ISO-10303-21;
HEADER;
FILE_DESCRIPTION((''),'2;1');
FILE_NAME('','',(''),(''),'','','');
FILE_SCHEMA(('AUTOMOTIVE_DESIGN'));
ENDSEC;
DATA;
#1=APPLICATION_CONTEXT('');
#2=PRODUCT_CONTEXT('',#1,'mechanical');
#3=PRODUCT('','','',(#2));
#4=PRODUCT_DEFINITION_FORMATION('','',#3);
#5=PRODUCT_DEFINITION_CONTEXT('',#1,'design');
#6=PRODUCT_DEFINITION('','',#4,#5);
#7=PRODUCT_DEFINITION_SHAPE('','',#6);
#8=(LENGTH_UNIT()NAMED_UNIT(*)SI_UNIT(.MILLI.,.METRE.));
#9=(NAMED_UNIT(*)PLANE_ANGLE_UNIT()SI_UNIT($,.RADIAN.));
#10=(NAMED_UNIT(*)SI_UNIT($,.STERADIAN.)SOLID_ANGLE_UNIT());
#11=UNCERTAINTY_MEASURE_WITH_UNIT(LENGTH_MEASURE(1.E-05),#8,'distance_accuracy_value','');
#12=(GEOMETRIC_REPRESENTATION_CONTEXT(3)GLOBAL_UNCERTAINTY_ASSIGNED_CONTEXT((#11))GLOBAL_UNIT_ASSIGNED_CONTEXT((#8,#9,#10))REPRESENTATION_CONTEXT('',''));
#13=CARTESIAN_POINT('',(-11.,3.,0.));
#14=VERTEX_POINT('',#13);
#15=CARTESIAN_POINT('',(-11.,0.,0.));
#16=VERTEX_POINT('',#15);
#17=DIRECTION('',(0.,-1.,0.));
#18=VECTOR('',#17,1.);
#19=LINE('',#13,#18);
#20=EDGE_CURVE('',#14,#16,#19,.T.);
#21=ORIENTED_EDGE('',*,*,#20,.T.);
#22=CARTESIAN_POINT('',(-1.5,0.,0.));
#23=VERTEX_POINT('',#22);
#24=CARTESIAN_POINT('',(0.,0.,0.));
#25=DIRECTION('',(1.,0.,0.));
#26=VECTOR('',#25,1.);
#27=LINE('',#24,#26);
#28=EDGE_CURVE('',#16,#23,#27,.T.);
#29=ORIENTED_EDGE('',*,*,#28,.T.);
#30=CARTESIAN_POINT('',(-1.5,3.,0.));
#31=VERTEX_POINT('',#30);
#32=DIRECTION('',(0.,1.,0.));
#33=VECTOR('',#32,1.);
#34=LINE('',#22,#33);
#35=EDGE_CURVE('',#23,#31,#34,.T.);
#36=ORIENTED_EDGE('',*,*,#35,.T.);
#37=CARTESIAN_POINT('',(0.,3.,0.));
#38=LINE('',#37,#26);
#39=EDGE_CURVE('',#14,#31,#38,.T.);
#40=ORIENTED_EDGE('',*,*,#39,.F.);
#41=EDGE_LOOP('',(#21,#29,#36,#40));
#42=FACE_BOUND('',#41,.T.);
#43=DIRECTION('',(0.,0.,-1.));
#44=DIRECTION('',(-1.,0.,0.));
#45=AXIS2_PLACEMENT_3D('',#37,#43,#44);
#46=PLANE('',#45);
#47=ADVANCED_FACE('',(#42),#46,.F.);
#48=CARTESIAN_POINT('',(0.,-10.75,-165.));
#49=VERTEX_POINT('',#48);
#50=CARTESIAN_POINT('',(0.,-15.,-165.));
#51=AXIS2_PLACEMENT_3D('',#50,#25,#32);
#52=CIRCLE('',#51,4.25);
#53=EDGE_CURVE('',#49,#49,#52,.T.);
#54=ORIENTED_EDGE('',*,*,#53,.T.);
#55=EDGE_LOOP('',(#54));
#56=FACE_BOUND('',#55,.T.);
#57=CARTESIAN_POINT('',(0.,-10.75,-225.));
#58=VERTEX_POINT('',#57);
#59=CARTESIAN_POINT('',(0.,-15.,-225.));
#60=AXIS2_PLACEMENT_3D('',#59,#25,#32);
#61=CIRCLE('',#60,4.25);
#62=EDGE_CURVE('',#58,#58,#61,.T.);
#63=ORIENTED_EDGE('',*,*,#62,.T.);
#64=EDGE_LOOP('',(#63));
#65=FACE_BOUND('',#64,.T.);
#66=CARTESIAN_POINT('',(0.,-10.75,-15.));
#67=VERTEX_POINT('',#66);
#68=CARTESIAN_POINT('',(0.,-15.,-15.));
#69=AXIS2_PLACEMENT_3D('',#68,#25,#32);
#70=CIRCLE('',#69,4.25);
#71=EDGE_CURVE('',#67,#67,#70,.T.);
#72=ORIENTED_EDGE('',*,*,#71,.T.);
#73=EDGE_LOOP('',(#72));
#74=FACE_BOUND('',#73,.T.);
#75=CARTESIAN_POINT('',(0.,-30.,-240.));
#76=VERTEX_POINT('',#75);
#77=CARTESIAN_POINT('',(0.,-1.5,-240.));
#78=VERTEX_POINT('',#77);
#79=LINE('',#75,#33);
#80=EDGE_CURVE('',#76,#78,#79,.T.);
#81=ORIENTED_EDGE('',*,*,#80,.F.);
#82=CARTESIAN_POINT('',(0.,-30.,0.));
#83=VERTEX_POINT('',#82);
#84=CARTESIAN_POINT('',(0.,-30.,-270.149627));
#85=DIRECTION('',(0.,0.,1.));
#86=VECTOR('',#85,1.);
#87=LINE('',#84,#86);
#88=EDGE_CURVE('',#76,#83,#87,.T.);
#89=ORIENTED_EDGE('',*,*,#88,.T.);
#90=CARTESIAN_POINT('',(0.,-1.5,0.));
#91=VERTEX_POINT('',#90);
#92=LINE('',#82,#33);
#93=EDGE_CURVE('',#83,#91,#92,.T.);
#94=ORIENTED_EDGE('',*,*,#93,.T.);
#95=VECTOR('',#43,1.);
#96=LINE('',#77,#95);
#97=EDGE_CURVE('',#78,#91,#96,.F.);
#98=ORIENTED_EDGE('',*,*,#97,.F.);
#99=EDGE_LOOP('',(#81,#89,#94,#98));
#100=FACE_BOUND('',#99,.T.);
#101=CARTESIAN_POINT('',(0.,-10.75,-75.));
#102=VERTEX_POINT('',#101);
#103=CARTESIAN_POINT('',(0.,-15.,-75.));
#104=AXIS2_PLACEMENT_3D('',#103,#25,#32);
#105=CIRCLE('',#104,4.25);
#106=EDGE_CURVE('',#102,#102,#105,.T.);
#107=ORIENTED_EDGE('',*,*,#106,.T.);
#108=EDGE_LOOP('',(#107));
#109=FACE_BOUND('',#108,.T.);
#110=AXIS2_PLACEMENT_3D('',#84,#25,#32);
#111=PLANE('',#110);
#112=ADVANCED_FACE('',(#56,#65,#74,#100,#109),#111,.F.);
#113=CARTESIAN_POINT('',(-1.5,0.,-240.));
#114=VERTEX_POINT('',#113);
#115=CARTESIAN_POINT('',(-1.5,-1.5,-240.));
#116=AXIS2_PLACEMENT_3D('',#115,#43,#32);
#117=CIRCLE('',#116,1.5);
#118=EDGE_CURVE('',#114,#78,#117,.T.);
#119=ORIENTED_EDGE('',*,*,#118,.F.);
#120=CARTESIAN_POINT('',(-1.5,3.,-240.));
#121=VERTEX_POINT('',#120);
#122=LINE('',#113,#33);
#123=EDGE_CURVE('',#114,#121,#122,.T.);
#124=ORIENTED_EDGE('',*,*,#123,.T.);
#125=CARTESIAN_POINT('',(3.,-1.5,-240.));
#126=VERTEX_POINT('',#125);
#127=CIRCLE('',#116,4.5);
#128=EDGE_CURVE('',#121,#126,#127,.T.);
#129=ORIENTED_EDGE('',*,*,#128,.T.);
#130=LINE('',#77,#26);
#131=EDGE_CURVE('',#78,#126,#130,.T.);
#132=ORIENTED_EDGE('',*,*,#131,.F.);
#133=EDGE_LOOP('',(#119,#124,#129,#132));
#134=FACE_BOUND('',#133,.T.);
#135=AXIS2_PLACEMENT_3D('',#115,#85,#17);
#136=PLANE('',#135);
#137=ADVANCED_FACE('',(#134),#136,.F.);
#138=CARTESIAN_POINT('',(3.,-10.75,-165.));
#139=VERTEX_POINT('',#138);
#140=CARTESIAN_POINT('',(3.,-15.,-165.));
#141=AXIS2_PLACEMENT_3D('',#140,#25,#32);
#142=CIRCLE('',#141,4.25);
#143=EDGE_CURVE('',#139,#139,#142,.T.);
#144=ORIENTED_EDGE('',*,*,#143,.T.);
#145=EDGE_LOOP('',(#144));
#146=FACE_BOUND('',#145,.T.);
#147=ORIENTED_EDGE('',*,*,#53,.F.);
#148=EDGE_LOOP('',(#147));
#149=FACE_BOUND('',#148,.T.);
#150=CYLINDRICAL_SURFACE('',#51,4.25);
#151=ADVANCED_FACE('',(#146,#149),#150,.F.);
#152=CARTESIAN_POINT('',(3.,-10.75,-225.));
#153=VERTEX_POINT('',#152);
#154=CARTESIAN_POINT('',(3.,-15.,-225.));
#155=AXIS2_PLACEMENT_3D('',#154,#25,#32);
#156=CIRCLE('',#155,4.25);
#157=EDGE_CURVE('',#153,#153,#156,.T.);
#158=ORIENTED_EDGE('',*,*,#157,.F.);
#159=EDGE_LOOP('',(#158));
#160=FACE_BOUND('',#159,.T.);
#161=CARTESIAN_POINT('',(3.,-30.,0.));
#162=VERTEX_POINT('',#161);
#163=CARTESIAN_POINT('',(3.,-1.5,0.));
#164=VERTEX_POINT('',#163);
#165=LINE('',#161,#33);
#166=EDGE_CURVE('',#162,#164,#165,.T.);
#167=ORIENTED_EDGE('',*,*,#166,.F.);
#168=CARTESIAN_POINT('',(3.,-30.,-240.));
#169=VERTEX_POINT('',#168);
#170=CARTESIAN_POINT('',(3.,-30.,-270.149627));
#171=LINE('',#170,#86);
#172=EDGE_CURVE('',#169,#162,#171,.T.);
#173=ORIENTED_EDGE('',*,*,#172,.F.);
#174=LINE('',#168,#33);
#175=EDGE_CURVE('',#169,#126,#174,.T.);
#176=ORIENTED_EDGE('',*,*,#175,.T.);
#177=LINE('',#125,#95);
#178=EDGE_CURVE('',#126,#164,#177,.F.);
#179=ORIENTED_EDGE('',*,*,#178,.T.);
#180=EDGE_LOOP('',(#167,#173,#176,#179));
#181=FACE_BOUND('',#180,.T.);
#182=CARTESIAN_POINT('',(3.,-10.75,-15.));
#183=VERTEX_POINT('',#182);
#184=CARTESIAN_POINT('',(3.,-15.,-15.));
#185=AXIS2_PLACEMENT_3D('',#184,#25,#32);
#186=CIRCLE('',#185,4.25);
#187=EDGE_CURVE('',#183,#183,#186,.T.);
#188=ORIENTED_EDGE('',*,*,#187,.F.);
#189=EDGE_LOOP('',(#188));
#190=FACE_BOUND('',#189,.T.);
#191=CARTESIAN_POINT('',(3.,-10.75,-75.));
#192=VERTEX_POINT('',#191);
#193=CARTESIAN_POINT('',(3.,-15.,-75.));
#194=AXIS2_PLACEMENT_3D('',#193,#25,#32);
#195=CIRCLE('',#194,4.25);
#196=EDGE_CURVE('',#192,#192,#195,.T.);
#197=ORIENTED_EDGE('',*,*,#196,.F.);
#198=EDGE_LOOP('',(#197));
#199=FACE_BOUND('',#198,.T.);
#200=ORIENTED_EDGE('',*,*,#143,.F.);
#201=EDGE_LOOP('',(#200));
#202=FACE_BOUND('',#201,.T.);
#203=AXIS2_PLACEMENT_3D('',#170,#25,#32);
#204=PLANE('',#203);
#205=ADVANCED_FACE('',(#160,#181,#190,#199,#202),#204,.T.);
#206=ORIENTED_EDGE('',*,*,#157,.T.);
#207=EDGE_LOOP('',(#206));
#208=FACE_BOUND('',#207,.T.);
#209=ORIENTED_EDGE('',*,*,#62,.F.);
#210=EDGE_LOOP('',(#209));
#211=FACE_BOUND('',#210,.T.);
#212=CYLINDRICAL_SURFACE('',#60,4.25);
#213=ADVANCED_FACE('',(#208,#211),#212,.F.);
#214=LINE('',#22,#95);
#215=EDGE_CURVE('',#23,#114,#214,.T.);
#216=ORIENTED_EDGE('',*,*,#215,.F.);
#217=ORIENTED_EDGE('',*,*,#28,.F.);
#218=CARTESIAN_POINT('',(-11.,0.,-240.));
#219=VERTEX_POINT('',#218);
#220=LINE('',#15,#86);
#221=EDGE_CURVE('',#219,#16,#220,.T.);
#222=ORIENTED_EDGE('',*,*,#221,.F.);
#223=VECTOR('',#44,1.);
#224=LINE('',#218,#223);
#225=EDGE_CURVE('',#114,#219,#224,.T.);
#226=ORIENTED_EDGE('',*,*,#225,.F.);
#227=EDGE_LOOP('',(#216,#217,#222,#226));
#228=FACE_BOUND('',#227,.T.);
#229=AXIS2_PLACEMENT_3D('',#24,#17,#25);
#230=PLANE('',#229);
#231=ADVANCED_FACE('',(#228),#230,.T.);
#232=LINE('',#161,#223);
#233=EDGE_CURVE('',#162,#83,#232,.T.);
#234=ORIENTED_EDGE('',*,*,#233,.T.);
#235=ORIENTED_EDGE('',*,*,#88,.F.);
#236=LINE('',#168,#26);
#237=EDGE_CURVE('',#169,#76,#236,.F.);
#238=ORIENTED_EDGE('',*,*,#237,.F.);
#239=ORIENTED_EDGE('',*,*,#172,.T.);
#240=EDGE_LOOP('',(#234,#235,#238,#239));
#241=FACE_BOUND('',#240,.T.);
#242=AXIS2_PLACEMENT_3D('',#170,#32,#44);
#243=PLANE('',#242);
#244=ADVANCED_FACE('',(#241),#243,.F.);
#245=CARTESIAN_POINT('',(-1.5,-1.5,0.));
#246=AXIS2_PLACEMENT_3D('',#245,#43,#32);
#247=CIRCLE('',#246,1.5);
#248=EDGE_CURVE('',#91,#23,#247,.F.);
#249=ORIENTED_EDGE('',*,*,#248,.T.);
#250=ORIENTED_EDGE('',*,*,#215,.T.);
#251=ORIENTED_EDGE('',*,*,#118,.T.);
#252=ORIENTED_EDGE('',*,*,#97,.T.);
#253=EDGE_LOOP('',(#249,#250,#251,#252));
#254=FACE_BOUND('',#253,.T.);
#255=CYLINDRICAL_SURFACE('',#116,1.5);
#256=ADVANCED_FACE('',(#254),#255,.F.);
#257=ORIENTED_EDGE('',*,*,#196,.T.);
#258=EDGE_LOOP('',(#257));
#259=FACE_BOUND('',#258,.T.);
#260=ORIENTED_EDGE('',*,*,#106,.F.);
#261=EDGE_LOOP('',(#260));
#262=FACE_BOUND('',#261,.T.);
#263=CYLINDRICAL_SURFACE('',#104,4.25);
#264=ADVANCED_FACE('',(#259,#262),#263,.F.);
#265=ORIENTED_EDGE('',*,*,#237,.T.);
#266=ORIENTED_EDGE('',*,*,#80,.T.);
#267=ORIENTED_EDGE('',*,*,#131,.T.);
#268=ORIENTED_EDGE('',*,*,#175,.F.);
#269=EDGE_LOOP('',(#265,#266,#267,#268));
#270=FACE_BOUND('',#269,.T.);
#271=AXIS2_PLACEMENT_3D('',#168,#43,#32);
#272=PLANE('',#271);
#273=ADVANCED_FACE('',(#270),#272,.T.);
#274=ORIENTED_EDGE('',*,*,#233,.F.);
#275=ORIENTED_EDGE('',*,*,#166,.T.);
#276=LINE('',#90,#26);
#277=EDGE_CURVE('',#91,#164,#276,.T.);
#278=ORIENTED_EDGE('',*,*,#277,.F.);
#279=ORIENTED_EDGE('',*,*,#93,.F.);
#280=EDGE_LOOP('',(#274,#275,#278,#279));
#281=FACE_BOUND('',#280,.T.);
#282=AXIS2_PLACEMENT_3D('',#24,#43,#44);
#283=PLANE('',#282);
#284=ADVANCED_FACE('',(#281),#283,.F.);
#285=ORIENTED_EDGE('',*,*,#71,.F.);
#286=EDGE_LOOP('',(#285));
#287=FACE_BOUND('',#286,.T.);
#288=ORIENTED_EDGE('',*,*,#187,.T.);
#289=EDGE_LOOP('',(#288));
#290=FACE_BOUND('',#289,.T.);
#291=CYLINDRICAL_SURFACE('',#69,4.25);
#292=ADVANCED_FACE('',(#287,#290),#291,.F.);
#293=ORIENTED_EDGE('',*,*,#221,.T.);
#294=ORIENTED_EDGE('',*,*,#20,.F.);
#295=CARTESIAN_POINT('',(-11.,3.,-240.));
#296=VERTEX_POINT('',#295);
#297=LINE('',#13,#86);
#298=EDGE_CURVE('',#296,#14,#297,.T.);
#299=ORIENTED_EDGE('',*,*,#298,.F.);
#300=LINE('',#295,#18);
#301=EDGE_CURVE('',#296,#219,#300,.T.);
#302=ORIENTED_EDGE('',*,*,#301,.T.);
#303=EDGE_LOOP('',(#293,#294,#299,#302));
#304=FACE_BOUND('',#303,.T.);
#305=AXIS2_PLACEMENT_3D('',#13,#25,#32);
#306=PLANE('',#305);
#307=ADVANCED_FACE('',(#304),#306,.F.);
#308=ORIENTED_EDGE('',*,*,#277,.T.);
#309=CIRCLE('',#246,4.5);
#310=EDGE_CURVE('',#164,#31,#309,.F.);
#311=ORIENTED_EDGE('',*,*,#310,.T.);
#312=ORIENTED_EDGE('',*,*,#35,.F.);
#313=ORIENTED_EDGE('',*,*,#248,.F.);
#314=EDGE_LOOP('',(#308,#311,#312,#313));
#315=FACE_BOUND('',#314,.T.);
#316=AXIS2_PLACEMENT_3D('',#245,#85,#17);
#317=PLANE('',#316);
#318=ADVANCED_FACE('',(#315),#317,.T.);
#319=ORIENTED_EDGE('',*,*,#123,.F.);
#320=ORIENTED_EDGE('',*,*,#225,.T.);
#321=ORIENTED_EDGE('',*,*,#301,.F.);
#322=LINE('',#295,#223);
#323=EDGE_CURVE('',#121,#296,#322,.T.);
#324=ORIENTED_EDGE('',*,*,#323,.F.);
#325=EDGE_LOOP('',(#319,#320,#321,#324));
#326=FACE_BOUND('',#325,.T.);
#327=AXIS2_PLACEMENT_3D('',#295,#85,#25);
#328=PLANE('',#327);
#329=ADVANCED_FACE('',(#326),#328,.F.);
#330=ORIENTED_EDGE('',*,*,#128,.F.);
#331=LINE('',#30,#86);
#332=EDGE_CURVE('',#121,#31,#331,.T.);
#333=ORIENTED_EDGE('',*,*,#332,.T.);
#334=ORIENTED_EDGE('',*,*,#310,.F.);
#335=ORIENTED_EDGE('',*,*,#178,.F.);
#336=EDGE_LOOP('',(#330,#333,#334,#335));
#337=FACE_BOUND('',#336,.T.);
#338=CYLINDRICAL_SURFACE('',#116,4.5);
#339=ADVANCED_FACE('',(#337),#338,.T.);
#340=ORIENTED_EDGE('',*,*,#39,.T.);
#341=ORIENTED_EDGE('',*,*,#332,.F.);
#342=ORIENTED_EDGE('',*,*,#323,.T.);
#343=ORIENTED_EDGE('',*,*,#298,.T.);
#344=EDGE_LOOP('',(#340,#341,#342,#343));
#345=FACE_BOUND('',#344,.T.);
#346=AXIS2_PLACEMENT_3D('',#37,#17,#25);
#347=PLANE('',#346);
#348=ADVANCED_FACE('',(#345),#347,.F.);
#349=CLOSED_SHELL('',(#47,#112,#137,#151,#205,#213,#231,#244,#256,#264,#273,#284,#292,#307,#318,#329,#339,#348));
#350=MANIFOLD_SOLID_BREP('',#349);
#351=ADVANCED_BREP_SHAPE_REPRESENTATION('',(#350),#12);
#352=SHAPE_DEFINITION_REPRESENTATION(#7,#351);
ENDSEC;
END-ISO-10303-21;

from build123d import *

# Parameters (mm, degrees)
SKETCH_1_W                       = 3
SKETCH_1_H                       = 30
SM_BASE_FLANGE_1_DEPTH           = 240
SKETCH_6_R                       = 4.25
CUT_EXTRUDE_1_DEPTH              = 242.886336944
SM_EDGE_FLANGE_1_STRIP_W         = 15
SM_EDGE_FLANGE_1_STRIP_H         = 3
SM_EDGE_FLANGE_1_STRIP_CUT_DEPTH = 240
SM_EDGE_FLANGE_1_DEPTH           = 240


# Sheet-metal steps are written as plain solids
with BuildPart() as part:
    # Sketch 1 → Базовая кромка1 (new body)
    with BuildSketch(Plane.XY):
        with Locations((1.5, -15)):
            Rectangle(SKETCH_1_W, SKETCH_1_H)
    extrude(amount=-SM_BASE_FLANGE_1_DEPTH)

    # Эскиз6 → Вырез-Вытянуть1 (cut, through all)
    with BuildSketch(Plane(origin=(3, 0, 0), x_dir=(0, 0, -1), z_dir=(1, 0, 0))):
        with Locations(Location((225, -15, 0), (0, 0, 90))):
            Circle(SKETCH_6_R)
        with Locations(Location((165, -15, 0), (0, 0, 90))):
            Circle(SKETCH_6_R)
        with Locations(Location((75, -15, 0), (0, 0, 90))):
            Circle(SKETCH_6_R)
        with Locations(Location((15, -15, 0), (0, 0, 90))):
            Circle(SKETCH_6_R)
    extrude(amount=-CUT_EXTRUDE_1_DEPTH, mode=Mode.SUBTRACT)

    # Ребро-кромка1 strip (across the edge) → Ребро-кромка1 strip cut (cut)
    with BuildSketch(Plane(origin=(0, 0, 0), x_dir=(0, -1, 0), z_dir=(0, 0, -1))):
        with Locations((-6, -1.5)):
            Rectangle(SM_EDGE_FLANGE_1_STRIP_W, SM_EDGE_FLANGE_1_STRIP_H)
    extrude(amount=SM_EDGE_FLANGE_1_STRIP_CUT_DEPTH, mode=Mode.SUBTRACT)

    # Ребро-кромка1 section (across the edge) → Ребро-кромка1 (add)
    with BuildSketch(Plane(origin=(0, 0, 0), x_dir=(0, -1, 0), z_dir=(0, 0, -1))):
        with BuildLine():
            Line((-3, 1.5), (-3, 11))
            Line((-3, 11), (0, 11))
            Line((0, 11), (0, 1.5))
            ThreePointArc((0, 1.5), (0.439339828, 0.439339828), (1.5, 0))
            Line((1.5, 0), (1.5, -3))
            ThreePointArc((1.5, -3), (-1.681980515, -1.681980515), (-3, 1.5))
        make_face()
    extrude(amount=SM_EDGE_FLANGE_1_DEPTH)


solid = part.part
